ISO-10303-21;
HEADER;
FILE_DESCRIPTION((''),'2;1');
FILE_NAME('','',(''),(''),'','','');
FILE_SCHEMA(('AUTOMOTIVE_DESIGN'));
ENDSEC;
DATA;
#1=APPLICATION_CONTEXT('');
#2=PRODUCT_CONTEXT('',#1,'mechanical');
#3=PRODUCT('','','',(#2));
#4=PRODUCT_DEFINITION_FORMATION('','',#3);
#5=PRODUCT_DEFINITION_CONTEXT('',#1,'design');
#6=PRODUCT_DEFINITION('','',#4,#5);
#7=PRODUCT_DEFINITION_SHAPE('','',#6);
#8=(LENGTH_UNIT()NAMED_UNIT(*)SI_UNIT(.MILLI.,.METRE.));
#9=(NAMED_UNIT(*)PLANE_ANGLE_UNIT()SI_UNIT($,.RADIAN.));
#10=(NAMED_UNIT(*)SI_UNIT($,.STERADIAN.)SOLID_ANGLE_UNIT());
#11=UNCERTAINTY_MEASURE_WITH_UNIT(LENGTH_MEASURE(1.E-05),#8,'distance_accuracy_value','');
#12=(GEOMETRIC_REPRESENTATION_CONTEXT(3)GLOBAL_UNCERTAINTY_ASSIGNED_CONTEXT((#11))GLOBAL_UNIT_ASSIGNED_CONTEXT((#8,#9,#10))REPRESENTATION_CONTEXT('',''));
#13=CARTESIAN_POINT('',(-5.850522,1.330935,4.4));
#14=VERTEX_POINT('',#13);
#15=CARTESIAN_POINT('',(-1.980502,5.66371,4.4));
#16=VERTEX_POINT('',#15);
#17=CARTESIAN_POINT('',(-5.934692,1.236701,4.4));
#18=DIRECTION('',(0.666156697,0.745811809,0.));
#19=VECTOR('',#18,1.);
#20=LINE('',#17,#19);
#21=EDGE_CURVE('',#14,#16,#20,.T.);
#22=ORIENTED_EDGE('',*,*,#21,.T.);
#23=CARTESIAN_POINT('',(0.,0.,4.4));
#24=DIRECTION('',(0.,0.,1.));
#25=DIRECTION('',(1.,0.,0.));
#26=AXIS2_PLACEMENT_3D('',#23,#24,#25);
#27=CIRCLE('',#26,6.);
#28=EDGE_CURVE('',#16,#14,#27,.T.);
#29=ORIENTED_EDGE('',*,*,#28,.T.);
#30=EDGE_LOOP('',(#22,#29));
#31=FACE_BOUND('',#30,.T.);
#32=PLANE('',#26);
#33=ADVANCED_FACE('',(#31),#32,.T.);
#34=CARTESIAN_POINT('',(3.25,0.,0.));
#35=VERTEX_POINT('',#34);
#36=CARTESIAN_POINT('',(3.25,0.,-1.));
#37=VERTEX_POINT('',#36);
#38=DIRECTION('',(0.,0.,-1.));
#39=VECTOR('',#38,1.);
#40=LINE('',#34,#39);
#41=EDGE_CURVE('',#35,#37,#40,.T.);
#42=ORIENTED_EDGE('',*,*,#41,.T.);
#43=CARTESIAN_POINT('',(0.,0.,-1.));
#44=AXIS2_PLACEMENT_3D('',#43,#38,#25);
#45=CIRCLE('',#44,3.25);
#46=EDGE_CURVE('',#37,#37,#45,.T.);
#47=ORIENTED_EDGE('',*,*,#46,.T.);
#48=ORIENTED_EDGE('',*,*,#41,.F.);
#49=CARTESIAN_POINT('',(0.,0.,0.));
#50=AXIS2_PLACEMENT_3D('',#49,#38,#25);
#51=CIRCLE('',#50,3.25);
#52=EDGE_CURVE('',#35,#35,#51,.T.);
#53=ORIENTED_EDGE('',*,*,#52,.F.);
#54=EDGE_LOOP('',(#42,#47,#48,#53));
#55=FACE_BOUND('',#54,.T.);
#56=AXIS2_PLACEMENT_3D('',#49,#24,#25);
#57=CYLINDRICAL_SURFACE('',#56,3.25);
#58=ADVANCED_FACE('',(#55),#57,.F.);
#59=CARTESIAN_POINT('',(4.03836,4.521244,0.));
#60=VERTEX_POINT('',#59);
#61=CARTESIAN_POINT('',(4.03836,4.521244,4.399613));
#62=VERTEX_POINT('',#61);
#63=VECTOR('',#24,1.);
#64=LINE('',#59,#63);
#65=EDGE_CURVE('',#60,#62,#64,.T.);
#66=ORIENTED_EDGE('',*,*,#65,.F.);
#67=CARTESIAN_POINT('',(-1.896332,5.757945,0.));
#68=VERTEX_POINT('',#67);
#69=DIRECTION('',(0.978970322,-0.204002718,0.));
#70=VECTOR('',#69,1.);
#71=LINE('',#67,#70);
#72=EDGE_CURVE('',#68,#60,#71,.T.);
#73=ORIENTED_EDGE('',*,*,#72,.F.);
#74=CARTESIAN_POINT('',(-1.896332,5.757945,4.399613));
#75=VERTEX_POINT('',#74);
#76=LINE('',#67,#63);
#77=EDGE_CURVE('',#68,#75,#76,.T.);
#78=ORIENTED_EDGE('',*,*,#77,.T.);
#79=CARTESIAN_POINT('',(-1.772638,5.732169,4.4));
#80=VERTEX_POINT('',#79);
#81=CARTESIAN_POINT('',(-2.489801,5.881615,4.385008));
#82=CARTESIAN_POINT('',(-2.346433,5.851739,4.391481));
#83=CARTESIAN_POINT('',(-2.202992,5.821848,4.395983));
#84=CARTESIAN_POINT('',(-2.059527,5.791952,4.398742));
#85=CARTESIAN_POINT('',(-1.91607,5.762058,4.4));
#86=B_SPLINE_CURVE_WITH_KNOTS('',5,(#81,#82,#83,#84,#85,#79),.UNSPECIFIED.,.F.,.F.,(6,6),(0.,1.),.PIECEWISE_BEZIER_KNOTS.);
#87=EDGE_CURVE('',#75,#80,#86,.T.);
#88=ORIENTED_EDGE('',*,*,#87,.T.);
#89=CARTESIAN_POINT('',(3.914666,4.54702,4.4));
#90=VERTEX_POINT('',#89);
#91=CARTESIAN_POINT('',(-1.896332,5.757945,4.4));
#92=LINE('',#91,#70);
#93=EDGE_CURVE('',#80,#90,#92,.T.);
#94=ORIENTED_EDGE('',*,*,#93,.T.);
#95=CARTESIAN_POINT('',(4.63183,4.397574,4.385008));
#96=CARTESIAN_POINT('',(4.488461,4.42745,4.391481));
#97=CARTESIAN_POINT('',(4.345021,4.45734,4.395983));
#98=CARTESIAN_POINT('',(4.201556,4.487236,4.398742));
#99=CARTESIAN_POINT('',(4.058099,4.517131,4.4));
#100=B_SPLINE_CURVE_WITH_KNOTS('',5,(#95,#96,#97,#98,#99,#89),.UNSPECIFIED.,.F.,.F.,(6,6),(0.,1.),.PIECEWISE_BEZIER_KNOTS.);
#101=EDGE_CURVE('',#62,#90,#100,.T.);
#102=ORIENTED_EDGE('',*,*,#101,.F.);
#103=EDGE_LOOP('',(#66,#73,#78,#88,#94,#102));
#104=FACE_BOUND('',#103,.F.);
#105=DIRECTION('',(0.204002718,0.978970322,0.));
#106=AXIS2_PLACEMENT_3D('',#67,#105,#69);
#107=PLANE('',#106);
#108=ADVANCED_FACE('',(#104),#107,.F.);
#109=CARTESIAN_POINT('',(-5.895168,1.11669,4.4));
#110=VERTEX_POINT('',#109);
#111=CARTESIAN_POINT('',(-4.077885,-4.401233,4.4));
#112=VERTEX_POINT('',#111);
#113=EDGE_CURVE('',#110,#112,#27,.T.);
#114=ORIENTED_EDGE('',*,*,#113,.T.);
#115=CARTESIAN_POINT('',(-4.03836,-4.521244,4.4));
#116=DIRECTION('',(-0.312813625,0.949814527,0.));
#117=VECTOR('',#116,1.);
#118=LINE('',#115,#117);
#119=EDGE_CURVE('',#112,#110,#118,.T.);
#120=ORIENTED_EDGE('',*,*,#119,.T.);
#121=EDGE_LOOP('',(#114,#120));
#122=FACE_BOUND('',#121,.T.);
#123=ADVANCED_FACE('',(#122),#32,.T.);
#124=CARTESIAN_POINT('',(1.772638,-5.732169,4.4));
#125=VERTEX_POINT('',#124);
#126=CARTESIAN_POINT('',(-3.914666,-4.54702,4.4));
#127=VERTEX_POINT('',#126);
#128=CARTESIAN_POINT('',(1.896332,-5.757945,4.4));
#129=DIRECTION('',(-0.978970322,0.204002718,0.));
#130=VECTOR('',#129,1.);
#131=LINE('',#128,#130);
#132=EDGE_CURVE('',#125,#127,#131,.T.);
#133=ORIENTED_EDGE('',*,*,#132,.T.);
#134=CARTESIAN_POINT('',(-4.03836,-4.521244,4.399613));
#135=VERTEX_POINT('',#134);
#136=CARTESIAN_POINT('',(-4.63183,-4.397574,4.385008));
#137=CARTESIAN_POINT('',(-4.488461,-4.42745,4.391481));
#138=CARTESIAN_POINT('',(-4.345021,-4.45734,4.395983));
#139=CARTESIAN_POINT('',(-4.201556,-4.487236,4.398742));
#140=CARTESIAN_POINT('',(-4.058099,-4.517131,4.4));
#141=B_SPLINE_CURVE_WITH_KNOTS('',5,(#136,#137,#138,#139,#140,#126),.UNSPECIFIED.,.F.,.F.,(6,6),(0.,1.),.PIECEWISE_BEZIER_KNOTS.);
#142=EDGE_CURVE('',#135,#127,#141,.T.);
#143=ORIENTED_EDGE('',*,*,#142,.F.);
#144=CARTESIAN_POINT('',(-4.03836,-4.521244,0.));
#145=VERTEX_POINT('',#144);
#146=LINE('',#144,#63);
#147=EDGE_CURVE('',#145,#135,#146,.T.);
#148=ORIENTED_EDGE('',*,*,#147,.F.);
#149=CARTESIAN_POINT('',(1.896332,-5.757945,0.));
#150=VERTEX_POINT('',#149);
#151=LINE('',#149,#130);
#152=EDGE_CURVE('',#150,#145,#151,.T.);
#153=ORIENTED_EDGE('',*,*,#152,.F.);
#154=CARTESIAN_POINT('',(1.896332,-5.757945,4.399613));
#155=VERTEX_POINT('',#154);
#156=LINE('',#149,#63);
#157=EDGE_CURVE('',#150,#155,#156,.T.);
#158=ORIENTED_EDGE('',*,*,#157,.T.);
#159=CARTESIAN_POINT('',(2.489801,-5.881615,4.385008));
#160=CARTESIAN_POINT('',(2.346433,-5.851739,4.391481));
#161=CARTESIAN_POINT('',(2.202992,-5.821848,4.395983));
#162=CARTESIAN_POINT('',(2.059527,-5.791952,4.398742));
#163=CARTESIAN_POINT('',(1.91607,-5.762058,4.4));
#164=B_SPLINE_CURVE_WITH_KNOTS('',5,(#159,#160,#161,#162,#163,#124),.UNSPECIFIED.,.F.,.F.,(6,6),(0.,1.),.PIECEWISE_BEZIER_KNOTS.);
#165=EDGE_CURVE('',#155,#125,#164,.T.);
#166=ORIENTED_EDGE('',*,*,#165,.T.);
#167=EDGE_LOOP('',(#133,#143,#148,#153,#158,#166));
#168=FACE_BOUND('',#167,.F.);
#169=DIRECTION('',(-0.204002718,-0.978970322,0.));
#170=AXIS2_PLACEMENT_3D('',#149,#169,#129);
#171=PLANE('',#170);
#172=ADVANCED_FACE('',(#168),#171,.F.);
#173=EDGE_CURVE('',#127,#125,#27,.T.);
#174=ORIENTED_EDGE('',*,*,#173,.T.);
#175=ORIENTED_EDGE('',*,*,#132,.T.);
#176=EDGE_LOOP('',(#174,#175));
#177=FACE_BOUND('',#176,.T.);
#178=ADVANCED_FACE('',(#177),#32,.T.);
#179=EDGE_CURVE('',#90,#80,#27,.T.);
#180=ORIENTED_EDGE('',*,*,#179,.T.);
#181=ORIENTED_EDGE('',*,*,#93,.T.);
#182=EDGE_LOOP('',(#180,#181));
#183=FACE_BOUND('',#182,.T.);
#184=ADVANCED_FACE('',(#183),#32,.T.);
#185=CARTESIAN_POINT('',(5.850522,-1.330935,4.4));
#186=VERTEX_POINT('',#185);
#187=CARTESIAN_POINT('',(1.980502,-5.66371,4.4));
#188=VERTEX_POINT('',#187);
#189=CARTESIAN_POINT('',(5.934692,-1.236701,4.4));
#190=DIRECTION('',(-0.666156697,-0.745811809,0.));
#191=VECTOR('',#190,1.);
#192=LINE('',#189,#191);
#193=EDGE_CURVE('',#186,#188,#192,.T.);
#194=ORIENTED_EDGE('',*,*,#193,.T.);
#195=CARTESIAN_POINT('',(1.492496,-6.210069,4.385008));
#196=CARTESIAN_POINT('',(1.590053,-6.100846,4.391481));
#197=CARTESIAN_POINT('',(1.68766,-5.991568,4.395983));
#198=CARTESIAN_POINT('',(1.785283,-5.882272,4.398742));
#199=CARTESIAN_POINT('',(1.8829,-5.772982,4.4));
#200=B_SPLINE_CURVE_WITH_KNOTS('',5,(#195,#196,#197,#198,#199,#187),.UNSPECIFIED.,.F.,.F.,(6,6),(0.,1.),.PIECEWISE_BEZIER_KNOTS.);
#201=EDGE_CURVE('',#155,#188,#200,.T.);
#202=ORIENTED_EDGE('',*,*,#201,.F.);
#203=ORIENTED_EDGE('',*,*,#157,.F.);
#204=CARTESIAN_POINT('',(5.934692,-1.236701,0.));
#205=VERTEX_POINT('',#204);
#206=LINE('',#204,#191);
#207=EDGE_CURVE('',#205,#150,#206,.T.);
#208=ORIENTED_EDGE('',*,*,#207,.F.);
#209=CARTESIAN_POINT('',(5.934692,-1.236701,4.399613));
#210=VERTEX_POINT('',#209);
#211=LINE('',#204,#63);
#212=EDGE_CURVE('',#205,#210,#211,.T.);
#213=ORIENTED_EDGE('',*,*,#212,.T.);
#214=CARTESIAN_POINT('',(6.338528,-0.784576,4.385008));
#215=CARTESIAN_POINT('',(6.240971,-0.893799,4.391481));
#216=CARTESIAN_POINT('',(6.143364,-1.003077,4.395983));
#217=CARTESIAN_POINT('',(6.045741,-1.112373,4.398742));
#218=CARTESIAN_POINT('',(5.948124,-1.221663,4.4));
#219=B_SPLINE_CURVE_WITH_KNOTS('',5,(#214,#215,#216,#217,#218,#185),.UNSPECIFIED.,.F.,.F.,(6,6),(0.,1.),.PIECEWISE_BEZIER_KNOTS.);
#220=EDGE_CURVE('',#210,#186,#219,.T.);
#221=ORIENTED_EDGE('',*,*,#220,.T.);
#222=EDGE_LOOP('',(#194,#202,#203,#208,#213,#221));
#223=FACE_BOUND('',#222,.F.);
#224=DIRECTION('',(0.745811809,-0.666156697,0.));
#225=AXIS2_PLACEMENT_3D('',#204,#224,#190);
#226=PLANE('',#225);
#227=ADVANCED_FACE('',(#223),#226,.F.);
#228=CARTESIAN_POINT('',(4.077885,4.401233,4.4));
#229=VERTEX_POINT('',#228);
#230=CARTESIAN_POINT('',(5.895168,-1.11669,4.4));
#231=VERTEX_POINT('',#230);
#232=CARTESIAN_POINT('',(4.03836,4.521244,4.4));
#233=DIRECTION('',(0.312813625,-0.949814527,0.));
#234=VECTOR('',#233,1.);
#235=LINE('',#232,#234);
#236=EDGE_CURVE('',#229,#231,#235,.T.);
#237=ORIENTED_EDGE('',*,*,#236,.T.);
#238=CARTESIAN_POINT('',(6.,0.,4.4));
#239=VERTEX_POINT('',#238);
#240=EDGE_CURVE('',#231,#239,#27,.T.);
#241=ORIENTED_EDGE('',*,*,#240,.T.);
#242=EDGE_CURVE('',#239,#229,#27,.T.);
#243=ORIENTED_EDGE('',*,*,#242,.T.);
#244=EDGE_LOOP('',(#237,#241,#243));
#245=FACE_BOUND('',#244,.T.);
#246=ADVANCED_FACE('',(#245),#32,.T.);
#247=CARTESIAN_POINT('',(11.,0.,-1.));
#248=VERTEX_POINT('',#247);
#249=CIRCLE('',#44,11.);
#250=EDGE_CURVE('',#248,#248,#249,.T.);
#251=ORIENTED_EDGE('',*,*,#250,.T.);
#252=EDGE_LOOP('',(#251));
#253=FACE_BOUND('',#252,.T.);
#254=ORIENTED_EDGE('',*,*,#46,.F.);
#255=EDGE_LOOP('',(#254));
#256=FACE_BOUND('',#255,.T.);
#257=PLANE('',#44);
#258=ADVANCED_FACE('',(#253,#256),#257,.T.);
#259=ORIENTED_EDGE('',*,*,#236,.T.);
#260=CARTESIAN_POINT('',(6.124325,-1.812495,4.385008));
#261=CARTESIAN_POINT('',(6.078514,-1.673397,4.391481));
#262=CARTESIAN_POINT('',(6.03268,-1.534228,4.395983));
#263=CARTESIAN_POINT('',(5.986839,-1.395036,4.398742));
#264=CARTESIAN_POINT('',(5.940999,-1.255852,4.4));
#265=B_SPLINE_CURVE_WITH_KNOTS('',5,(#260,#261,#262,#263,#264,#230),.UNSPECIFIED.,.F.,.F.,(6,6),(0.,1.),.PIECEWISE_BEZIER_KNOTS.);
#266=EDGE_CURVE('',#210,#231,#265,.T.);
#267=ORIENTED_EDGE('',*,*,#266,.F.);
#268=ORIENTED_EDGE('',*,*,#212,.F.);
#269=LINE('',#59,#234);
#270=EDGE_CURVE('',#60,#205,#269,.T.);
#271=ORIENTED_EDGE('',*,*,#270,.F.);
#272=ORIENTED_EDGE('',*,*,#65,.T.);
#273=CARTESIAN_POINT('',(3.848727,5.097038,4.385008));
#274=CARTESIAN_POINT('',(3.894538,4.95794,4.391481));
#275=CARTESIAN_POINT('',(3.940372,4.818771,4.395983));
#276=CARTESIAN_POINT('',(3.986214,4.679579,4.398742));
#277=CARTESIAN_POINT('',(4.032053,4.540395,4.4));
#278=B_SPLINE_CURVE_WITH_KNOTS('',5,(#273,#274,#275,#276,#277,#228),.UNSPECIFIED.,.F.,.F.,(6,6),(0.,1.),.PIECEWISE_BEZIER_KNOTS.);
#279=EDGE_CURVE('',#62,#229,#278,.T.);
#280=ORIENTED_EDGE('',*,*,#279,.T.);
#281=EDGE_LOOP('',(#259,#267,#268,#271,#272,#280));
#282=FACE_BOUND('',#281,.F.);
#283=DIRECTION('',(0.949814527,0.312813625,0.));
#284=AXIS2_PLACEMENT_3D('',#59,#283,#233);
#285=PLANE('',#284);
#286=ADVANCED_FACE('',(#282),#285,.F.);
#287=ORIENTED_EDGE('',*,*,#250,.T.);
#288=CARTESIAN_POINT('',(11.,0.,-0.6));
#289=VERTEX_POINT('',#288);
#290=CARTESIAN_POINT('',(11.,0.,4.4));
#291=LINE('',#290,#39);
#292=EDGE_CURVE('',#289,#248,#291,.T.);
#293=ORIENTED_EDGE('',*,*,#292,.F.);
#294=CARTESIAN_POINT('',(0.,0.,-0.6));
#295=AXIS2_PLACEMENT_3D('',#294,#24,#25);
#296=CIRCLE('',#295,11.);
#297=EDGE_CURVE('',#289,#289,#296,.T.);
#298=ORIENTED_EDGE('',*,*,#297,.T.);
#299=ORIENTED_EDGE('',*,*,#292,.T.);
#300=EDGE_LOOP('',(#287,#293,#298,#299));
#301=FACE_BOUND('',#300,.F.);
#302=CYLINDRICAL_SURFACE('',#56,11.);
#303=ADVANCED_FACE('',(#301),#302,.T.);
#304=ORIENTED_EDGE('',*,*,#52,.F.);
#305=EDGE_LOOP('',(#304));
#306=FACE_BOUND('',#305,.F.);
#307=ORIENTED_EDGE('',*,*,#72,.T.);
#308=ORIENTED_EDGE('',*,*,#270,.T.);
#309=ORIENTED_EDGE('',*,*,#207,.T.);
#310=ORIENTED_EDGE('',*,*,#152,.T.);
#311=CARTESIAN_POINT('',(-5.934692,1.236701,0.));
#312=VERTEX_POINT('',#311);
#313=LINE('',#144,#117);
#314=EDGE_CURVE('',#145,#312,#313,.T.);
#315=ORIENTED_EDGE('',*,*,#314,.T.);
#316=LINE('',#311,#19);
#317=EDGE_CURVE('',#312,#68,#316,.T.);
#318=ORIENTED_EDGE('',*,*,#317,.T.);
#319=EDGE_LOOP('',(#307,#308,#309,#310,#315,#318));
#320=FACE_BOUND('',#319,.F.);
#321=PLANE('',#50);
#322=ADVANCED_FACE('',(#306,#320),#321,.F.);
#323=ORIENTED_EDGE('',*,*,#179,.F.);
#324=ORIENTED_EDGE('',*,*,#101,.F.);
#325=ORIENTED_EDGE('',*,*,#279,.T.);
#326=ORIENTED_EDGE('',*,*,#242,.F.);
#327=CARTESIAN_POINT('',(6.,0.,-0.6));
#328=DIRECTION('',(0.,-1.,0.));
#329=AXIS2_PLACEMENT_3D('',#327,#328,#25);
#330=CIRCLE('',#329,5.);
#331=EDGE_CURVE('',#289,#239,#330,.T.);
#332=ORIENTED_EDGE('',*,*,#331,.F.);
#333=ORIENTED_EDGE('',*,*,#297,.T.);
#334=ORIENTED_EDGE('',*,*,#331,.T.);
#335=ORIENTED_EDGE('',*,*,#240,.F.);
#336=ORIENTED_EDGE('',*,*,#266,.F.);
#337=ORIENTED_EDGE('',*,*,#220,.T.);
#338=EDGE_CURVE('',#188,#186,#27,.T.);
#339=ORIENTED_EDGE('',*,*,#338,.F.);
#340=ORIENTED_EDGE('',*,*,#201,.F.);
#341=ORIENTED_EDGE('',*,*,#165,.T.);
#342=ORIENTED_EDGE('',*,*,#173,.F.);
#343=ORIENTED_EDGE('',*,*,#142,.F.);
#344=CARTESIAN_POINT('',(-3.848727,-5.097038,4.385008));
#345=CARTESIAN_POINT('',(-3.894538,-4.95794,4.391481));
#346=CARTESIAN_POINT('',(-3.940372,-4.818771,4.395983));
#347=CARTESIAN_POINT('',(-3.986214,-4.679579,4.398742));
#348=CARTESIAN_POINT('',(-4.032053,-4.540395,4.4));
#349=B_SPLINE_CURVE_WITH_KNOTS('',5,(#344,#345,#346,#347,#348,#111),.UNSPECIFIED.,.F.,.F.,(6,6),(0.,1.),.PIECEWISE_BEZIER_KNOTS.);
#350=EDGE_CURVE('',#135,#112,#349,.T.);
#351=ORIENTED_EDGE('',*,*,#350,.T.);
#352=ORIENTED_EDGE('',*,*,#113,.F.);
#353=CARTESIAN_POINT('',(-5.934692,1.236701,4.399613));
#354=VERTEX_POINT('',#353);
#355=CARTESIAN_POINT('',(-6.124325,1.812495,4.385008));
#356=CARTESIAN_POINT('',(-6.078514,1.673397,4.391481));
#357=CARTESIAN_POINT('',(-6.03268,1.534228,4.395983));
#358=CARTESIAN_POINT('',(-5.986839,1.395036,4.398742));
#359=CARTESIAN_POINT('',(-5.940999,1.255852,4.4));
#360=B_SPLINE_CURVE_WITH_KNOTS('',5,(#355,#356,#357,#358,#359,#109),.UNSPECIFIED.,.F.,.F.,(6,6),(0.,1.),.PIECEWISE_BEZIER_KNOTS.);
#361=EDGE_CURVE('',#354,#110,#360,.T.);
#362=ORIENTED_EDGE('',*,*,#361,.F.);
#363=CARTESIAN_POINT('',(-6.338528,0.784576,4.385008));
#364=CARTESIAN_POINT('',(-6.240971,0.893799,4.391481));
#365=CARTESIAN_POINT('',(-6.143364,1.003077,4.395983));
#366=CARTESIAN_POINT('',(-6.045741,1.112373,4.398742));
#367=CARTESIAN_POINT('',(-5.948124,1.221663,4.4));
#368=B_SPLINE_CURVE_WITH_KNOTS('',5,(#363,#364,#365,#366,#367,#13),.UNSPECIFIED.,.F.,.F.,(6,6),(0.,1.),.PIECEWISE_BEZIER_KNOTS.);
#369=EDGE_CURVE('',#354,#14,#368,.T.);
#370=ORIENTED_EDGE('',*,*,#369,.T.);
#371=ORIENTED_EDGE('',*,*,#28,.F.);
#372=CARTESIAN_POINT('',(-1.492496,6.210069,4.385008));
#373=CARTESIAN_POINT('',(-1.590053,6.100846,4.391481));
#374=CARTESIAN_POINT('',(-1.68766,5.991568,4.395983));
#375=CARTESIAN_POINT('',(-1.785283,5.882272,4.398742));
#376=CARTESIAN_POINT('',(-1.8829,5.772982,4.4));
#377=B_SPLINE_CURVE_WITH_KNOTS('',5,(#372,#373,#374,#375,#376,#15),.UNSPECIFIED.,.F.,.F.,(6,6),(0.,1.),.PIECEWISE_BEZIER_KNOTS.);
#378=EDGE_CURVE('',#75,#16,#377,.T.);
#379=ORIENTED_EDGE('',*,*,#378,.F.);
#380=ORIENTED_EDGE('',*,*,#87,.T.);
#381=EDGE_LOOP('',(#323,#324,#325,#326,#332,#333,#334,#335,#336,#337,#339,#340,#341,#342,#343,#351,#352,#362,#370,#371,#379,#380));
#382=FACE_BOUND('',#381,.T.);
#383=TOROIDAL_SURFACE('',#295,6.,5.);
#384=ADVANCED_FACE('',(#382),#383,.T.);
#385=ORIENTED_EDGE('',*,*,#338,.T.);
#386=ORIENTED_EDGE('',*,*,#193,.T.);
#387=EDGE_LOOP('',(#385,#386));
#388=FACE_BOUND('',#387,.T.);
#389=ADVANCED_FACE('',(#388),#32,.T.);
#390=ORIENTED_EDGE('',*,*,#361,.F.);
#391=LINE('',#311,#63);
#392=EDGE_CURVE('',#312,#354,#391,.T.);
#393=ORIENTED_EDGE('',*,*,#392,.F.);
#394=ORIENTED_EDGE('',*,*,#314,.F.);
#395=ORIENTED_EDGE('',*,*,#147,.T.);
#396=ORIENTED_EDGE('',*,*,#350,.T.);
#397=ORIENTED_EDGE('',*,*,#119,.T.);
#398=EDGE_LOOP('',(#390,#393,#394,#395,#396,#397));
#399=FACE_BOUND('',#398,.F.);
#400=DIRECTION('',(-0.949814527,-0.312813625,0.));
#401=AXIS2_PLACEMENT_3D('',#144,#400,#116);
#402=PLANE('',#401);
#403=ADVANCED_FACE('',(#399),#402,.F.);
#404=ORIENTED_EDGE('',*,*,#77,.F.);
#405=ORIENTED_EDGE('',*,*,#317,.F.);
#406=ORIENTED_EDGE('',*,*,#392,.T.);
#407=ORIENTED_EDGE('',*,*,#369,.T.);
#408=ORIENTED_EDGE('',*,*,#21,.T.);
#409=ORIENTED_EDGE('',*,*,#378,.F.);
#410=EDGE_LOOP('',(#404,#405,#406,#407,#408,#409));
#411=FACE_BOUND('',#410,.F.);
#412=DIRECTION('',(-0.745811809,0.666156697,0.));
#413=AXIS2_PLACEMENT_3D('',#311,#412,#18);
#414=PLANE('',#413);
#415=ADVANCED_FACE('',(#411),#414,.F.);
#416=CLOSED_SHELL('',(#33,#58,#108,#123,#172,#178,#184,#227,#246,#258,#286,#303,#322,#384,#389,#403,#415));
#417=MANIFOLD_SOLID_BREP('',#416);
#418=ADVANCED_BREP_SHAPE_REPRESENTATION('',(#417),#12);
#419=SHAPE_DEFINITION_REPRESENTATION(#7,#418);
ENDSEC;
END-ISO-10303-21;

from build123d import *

# Parameters (mm, degrees)
F0_R     = 11
F1_DEPTH = 4.4
F2_R     = 11
F2_R_2   = 3.25
F3_DEPTH = 1


# Not quite as in the source:
# - a fillet or chamfer that OpenCascade refuses, or shapes differently, is made with other operations: its cross-section is extruded or revolved along the edge and cut away or added


with BuildPart() as f1:
    # F0 (on Top) → F1 (new body)
    with BuildSketch(Plane.XY):
        Circle(F0_R)
        Polygon((4.0383603583, 4.521243813), (5.9346921779, -1.2367007534), (1.8963318196, -5.7579445664), (-4.0383603583, -4.521243813), (-5.9346921779, 1.2367007534), (-1.8963318196, 5.7579445664), align=None, mode=Mode.SUBTRACT)
    extrude(amount=F1_DEPTH)

    # F2 (on face) → F3 (join)
    with BuildSketch(Plane(origin=(0, 0, 0), x_dir=(1, 0, 0), z_dir=(0, 0, -1))):
        Circle(F2_R)
        Circle(F2_R_2, mode=Mode.SUBTRACT)
    extrude(amount=F3_DEPTH)

    # F4: fillet of radius 5 on 1 edges, made by hand

    # F4_s1 → F4_t2 (revolve, cut)
    with BuildSketch(Plane.XZ):
        with BuildLine():
            ThreePointArc((11, -0.6), (9.5355339059, 2.9355339059), (6, 4.4))
            Line((6, 4.4), (11, 4.4))
            Line((11, 4.4), (11, -0.6))
        make_face()
    revolve(axis=Axis((0, 0, 4.4), (0, 0, 1)), mode=Mode.SUBTRACT)


solid = f1.part
